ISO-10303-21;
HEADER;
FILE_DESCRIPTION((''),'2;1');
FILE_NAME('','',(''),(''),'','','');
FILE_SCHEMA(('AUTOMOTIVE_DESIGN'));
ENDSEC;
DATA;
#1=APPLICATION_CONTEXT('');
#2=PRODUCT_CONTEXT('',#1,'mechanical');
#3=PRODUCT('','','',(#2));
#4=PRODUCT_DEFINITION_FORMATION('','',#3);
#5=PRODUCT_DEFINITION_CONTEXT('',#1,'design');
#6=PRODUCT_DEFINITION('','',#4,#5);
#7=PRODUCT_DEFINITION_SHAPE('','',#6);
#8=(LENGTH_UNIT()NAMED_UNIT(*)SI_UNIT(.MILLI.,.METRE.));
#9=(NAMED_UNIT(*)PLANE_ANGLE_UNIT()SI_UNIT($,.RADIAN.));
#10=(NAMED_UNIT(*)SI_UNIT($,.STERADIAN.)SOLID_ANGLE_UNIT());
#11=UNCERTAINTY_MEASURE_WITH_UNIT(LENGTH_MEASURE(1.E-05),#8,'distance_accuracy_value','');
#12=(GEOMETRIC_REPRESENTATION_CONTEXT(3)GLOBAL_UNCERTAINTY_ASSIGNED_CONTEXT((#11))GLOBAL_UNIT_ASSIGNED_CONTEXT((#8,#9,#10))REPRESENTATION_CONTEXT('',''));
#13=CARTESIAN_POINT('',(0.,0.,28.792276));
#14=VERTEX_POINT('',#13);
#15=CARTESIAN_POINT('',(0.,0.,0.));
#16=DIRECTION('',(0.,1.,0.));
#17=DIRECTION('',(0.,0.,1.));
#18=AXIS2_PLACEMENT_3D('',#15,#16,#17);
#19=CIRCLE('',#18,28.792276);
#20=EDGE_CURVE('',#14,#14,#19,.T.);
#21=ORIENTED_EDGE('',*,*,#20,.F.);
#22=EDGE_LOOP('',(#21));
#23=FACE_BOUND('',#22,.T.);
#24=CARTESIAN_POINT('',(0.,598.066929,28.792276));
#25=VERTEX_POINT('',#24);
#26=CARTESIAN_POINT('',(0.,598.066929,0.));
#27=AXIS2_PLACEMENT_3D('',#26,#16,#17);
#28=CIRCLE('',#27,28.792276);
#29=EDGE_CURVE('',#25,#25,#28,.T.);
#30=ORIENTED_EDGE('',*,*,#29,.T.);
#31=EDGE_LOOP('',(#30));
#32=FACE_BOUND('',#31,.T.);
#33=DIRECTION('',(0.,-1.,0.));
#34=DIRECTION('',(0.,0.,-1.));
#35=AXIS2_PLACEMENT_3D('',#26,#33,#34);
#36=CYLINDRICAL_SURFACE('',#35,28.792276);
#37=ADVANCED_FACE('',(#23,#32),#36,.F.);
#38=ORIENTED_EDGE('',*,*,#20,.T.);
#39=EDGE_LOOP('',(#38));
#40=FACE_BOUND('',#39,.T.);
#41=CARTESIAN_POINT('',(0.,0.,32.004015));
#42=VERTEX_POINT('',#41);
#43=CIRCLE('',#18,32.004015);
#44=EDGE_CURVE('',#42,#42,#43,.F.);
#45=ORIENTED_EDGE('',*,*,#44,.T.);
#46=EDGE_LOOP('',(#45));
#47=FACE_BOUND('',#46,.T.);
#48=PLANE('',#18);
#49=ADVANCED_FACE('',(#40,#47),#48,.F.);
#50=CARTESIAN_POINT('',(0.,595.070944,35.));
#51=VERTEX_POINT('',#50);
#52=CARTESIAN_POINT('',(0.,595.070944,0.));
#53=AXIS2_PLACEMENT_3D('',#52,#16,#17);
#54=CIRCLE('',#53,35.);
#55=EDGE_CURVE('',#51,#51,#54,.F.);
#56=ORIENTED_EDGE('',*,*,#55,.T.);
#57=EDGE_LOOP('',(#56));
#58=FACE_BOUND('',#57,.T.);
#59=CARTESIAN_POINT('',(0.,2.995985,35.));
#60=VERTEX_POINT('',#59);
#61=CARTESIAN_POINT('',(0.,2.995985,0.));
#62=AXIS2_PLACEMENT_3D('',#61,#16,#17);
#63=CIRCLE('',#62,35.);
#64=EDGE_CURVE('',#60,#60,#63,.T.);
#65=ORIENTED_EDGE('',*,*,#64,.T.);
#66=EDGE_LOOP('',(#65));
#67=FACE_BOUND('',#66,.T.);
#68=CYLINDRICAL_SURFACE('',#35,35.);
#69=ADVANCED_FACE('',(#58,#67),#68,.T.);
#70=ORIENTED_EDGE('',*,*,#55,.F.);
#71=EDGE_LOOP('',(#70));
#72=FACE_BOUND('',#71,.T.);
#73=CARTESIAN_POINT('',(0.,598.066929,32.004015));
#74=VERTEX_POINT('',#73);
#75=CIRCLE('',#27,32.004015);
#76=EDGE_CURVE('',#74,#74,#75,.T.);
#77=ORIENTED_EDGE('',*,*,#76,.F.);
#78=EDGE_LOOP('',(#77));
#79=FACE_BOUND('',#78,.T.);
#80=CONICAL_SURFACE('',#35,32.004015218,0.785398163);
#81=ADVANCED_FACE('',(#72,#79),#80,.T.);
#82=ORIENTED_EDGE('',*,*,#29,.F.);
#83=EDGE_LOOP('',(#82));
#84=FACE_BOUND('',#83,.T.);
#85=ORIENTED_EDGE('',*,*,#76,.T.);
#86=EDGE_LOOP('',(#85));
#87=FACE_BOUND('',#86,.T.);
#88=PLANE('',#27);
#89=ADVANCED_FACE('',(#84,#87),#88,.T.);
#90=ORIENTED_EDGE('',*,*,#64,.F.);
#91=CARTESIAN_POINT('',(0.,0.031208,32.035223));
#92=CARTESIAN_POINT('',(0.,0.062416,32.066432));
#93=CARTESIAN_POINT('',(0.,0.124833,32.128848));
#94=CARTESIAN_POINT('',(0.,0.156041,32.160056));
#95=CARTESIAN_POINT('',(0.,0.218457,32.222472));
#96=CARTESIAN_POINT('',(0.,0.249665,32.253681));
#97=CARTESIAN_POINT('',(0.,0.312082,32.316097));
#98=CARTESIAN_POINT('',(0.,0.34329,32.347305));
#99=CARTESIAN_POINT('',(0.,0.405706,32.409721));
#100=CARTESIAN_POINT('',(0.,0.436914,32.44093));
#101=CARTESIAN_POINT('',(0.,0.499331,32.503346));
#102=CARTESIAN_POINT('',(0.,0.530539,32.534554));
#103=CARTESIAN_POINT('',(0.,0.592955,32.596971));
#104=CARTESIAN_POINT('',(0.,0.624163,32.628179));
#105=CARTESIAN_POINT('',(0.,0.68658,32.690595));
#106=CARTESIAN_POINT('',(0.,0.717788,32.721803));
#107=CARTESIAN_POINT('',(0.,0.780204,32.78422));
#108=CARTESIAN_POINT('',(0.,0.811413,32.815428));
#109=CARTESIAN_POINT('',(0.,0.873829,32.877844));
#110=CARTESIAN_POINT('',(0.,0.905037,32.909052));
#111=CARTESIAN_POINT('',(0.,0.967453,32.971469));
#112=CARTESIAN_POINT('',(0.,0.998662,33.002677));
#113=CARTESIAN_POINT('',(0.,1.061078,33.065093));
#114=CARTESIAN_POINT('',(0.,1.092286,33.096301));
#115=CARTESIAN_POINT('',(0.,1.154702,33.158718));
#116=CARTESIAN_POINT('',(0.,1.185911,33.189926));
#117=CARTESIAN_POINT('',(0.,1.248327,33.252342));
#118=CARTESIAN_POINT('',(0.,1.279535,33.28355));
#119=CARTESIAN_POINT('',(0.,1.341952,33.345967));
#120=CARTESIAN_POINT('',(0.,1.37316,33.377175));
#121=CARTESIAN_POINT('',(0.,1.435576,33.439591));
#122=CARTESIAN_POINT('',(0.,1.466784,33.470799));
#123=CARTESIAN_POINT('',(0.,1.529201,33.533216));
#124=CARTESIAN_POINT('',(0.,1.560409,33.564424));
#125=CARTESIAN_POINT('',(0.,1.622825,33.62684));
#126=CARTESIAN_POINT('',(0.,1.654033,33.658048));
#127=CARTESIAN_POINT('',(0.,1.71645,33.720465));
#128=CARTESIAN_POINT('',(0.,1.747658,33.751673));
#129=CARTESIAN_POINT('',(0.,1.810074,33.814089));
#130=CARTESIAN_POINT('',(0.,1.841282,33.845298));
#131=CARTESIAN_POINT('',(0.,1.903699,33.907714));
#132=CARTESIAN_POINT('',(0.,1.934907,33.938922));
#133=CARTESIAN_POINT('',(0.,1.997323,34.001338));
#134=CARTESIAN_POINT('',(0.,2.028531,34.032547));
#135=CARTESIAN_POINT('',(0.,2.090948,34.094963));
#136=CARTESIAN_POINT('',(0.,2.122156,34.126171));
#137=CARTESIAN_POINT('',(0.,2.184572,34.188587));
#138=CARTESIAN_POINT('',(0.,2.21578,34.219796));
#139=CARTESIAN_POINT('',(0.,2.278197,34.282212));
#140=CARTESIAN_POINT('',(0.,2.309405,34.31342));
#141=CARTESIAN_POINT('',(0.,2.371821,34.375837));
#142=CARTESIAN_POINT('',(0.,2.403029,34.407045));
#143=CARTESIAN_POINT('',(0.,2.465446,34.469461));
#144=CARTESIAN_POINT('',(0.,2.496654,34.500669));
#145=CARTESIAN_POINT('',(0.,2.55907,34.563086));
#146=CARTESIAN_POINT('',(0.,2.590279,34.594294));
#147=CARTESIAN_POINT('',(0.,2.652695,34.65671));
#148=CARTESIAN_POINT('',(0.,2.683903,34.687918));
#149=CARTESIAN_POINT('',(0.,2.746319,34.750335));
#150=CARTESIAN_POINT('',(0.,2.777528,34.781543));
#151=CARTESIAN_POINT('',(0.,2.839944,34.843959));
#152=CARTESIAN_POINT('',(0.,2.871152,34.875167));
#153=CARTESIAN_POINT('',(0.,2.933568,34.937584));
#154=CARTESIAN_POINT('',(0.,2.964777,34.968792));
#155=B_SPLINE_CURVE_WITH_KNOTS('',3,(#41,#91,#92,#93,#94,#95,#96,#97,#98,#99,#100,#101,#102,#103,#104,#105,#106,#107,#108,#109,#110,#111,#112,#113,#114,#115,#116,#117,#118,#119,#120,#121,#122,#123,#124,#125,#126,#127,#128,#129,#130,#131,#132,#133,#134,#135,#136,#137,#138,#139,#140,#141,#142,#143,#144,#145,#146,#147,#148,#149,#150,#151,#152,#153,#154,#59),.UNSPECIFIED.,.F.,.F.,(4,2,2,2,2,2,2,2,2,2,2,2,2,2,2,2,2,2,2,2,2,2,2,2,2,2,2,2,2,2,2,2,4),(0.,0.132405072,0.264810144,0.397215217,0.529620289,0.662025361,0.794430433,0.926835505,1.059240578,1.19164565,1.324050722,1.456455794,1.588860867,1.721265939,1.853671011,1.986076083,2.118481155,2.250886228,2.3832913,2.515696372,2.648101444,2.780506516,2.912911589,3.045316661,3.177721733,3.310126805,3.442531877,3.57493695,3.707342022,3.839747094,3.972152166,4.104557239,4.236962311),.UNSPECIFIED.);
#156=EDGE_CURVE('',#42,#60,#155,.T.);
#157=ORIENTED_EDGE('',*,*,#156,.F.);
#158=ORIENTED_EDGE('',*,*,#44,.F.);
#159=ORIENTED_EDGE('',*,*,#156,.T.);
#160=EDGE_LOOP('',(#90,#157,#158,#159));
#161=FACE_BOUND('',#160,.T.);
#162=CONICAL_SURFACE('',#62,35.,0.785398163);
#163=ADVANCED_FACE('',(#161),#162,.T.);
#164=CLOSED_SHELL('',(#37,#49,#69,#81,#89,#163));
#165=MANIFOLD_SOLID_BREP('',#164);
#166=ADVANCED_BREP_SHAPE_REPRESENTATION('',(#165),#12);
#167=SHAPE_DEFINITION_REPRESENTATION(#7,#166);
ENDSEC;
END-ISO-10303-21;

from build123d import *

# Parameters (mm, degrees)
SKETCH1_R           = 35
BOSS_EXTRUDE1_DEPTH = 598.066929256
SKETCH2_R           = 28.792275849
CUT_EXTRUDE1_DEPTH  = 601.111699494
CHAMFER1_SIZE       = 2.995984782


with BuildPart() as part:
    # Sketch1 → Boss-Extrude1 (new body)
    with BuildSketch(Plane(origin=(0, 0, 0), x_dir=(1, 0, 0), z_dir=(0, 1, 0))):
        Circle(SKETCH1_R)
    extrude(amount=BOSS_EXTRUDE1_DEPTH)

    # Sketch2 → Cut-Extrude1 (cut, through all)
    with BuildSketch(Plane(origin=(0, 0, 0), x_dir=(1, 0, 0), z_dir=(0, 1, 0))):
        Circle(SKETCH2_R)
    extrude(amount=CUT_EXTRUDE1_DEPTH, mode=Mode.SUBTRACT)

    # Chamfer1
    chamfer1_edges = [part.edges().sort_by_distance(p)[0] for p in [
        (-35, 598.066929256, 0),
        (-35, 0, 0),
    ]]
    chamfer(chamfer1_edges, length=CHAMFER1_SIZE)


solid = part.part
